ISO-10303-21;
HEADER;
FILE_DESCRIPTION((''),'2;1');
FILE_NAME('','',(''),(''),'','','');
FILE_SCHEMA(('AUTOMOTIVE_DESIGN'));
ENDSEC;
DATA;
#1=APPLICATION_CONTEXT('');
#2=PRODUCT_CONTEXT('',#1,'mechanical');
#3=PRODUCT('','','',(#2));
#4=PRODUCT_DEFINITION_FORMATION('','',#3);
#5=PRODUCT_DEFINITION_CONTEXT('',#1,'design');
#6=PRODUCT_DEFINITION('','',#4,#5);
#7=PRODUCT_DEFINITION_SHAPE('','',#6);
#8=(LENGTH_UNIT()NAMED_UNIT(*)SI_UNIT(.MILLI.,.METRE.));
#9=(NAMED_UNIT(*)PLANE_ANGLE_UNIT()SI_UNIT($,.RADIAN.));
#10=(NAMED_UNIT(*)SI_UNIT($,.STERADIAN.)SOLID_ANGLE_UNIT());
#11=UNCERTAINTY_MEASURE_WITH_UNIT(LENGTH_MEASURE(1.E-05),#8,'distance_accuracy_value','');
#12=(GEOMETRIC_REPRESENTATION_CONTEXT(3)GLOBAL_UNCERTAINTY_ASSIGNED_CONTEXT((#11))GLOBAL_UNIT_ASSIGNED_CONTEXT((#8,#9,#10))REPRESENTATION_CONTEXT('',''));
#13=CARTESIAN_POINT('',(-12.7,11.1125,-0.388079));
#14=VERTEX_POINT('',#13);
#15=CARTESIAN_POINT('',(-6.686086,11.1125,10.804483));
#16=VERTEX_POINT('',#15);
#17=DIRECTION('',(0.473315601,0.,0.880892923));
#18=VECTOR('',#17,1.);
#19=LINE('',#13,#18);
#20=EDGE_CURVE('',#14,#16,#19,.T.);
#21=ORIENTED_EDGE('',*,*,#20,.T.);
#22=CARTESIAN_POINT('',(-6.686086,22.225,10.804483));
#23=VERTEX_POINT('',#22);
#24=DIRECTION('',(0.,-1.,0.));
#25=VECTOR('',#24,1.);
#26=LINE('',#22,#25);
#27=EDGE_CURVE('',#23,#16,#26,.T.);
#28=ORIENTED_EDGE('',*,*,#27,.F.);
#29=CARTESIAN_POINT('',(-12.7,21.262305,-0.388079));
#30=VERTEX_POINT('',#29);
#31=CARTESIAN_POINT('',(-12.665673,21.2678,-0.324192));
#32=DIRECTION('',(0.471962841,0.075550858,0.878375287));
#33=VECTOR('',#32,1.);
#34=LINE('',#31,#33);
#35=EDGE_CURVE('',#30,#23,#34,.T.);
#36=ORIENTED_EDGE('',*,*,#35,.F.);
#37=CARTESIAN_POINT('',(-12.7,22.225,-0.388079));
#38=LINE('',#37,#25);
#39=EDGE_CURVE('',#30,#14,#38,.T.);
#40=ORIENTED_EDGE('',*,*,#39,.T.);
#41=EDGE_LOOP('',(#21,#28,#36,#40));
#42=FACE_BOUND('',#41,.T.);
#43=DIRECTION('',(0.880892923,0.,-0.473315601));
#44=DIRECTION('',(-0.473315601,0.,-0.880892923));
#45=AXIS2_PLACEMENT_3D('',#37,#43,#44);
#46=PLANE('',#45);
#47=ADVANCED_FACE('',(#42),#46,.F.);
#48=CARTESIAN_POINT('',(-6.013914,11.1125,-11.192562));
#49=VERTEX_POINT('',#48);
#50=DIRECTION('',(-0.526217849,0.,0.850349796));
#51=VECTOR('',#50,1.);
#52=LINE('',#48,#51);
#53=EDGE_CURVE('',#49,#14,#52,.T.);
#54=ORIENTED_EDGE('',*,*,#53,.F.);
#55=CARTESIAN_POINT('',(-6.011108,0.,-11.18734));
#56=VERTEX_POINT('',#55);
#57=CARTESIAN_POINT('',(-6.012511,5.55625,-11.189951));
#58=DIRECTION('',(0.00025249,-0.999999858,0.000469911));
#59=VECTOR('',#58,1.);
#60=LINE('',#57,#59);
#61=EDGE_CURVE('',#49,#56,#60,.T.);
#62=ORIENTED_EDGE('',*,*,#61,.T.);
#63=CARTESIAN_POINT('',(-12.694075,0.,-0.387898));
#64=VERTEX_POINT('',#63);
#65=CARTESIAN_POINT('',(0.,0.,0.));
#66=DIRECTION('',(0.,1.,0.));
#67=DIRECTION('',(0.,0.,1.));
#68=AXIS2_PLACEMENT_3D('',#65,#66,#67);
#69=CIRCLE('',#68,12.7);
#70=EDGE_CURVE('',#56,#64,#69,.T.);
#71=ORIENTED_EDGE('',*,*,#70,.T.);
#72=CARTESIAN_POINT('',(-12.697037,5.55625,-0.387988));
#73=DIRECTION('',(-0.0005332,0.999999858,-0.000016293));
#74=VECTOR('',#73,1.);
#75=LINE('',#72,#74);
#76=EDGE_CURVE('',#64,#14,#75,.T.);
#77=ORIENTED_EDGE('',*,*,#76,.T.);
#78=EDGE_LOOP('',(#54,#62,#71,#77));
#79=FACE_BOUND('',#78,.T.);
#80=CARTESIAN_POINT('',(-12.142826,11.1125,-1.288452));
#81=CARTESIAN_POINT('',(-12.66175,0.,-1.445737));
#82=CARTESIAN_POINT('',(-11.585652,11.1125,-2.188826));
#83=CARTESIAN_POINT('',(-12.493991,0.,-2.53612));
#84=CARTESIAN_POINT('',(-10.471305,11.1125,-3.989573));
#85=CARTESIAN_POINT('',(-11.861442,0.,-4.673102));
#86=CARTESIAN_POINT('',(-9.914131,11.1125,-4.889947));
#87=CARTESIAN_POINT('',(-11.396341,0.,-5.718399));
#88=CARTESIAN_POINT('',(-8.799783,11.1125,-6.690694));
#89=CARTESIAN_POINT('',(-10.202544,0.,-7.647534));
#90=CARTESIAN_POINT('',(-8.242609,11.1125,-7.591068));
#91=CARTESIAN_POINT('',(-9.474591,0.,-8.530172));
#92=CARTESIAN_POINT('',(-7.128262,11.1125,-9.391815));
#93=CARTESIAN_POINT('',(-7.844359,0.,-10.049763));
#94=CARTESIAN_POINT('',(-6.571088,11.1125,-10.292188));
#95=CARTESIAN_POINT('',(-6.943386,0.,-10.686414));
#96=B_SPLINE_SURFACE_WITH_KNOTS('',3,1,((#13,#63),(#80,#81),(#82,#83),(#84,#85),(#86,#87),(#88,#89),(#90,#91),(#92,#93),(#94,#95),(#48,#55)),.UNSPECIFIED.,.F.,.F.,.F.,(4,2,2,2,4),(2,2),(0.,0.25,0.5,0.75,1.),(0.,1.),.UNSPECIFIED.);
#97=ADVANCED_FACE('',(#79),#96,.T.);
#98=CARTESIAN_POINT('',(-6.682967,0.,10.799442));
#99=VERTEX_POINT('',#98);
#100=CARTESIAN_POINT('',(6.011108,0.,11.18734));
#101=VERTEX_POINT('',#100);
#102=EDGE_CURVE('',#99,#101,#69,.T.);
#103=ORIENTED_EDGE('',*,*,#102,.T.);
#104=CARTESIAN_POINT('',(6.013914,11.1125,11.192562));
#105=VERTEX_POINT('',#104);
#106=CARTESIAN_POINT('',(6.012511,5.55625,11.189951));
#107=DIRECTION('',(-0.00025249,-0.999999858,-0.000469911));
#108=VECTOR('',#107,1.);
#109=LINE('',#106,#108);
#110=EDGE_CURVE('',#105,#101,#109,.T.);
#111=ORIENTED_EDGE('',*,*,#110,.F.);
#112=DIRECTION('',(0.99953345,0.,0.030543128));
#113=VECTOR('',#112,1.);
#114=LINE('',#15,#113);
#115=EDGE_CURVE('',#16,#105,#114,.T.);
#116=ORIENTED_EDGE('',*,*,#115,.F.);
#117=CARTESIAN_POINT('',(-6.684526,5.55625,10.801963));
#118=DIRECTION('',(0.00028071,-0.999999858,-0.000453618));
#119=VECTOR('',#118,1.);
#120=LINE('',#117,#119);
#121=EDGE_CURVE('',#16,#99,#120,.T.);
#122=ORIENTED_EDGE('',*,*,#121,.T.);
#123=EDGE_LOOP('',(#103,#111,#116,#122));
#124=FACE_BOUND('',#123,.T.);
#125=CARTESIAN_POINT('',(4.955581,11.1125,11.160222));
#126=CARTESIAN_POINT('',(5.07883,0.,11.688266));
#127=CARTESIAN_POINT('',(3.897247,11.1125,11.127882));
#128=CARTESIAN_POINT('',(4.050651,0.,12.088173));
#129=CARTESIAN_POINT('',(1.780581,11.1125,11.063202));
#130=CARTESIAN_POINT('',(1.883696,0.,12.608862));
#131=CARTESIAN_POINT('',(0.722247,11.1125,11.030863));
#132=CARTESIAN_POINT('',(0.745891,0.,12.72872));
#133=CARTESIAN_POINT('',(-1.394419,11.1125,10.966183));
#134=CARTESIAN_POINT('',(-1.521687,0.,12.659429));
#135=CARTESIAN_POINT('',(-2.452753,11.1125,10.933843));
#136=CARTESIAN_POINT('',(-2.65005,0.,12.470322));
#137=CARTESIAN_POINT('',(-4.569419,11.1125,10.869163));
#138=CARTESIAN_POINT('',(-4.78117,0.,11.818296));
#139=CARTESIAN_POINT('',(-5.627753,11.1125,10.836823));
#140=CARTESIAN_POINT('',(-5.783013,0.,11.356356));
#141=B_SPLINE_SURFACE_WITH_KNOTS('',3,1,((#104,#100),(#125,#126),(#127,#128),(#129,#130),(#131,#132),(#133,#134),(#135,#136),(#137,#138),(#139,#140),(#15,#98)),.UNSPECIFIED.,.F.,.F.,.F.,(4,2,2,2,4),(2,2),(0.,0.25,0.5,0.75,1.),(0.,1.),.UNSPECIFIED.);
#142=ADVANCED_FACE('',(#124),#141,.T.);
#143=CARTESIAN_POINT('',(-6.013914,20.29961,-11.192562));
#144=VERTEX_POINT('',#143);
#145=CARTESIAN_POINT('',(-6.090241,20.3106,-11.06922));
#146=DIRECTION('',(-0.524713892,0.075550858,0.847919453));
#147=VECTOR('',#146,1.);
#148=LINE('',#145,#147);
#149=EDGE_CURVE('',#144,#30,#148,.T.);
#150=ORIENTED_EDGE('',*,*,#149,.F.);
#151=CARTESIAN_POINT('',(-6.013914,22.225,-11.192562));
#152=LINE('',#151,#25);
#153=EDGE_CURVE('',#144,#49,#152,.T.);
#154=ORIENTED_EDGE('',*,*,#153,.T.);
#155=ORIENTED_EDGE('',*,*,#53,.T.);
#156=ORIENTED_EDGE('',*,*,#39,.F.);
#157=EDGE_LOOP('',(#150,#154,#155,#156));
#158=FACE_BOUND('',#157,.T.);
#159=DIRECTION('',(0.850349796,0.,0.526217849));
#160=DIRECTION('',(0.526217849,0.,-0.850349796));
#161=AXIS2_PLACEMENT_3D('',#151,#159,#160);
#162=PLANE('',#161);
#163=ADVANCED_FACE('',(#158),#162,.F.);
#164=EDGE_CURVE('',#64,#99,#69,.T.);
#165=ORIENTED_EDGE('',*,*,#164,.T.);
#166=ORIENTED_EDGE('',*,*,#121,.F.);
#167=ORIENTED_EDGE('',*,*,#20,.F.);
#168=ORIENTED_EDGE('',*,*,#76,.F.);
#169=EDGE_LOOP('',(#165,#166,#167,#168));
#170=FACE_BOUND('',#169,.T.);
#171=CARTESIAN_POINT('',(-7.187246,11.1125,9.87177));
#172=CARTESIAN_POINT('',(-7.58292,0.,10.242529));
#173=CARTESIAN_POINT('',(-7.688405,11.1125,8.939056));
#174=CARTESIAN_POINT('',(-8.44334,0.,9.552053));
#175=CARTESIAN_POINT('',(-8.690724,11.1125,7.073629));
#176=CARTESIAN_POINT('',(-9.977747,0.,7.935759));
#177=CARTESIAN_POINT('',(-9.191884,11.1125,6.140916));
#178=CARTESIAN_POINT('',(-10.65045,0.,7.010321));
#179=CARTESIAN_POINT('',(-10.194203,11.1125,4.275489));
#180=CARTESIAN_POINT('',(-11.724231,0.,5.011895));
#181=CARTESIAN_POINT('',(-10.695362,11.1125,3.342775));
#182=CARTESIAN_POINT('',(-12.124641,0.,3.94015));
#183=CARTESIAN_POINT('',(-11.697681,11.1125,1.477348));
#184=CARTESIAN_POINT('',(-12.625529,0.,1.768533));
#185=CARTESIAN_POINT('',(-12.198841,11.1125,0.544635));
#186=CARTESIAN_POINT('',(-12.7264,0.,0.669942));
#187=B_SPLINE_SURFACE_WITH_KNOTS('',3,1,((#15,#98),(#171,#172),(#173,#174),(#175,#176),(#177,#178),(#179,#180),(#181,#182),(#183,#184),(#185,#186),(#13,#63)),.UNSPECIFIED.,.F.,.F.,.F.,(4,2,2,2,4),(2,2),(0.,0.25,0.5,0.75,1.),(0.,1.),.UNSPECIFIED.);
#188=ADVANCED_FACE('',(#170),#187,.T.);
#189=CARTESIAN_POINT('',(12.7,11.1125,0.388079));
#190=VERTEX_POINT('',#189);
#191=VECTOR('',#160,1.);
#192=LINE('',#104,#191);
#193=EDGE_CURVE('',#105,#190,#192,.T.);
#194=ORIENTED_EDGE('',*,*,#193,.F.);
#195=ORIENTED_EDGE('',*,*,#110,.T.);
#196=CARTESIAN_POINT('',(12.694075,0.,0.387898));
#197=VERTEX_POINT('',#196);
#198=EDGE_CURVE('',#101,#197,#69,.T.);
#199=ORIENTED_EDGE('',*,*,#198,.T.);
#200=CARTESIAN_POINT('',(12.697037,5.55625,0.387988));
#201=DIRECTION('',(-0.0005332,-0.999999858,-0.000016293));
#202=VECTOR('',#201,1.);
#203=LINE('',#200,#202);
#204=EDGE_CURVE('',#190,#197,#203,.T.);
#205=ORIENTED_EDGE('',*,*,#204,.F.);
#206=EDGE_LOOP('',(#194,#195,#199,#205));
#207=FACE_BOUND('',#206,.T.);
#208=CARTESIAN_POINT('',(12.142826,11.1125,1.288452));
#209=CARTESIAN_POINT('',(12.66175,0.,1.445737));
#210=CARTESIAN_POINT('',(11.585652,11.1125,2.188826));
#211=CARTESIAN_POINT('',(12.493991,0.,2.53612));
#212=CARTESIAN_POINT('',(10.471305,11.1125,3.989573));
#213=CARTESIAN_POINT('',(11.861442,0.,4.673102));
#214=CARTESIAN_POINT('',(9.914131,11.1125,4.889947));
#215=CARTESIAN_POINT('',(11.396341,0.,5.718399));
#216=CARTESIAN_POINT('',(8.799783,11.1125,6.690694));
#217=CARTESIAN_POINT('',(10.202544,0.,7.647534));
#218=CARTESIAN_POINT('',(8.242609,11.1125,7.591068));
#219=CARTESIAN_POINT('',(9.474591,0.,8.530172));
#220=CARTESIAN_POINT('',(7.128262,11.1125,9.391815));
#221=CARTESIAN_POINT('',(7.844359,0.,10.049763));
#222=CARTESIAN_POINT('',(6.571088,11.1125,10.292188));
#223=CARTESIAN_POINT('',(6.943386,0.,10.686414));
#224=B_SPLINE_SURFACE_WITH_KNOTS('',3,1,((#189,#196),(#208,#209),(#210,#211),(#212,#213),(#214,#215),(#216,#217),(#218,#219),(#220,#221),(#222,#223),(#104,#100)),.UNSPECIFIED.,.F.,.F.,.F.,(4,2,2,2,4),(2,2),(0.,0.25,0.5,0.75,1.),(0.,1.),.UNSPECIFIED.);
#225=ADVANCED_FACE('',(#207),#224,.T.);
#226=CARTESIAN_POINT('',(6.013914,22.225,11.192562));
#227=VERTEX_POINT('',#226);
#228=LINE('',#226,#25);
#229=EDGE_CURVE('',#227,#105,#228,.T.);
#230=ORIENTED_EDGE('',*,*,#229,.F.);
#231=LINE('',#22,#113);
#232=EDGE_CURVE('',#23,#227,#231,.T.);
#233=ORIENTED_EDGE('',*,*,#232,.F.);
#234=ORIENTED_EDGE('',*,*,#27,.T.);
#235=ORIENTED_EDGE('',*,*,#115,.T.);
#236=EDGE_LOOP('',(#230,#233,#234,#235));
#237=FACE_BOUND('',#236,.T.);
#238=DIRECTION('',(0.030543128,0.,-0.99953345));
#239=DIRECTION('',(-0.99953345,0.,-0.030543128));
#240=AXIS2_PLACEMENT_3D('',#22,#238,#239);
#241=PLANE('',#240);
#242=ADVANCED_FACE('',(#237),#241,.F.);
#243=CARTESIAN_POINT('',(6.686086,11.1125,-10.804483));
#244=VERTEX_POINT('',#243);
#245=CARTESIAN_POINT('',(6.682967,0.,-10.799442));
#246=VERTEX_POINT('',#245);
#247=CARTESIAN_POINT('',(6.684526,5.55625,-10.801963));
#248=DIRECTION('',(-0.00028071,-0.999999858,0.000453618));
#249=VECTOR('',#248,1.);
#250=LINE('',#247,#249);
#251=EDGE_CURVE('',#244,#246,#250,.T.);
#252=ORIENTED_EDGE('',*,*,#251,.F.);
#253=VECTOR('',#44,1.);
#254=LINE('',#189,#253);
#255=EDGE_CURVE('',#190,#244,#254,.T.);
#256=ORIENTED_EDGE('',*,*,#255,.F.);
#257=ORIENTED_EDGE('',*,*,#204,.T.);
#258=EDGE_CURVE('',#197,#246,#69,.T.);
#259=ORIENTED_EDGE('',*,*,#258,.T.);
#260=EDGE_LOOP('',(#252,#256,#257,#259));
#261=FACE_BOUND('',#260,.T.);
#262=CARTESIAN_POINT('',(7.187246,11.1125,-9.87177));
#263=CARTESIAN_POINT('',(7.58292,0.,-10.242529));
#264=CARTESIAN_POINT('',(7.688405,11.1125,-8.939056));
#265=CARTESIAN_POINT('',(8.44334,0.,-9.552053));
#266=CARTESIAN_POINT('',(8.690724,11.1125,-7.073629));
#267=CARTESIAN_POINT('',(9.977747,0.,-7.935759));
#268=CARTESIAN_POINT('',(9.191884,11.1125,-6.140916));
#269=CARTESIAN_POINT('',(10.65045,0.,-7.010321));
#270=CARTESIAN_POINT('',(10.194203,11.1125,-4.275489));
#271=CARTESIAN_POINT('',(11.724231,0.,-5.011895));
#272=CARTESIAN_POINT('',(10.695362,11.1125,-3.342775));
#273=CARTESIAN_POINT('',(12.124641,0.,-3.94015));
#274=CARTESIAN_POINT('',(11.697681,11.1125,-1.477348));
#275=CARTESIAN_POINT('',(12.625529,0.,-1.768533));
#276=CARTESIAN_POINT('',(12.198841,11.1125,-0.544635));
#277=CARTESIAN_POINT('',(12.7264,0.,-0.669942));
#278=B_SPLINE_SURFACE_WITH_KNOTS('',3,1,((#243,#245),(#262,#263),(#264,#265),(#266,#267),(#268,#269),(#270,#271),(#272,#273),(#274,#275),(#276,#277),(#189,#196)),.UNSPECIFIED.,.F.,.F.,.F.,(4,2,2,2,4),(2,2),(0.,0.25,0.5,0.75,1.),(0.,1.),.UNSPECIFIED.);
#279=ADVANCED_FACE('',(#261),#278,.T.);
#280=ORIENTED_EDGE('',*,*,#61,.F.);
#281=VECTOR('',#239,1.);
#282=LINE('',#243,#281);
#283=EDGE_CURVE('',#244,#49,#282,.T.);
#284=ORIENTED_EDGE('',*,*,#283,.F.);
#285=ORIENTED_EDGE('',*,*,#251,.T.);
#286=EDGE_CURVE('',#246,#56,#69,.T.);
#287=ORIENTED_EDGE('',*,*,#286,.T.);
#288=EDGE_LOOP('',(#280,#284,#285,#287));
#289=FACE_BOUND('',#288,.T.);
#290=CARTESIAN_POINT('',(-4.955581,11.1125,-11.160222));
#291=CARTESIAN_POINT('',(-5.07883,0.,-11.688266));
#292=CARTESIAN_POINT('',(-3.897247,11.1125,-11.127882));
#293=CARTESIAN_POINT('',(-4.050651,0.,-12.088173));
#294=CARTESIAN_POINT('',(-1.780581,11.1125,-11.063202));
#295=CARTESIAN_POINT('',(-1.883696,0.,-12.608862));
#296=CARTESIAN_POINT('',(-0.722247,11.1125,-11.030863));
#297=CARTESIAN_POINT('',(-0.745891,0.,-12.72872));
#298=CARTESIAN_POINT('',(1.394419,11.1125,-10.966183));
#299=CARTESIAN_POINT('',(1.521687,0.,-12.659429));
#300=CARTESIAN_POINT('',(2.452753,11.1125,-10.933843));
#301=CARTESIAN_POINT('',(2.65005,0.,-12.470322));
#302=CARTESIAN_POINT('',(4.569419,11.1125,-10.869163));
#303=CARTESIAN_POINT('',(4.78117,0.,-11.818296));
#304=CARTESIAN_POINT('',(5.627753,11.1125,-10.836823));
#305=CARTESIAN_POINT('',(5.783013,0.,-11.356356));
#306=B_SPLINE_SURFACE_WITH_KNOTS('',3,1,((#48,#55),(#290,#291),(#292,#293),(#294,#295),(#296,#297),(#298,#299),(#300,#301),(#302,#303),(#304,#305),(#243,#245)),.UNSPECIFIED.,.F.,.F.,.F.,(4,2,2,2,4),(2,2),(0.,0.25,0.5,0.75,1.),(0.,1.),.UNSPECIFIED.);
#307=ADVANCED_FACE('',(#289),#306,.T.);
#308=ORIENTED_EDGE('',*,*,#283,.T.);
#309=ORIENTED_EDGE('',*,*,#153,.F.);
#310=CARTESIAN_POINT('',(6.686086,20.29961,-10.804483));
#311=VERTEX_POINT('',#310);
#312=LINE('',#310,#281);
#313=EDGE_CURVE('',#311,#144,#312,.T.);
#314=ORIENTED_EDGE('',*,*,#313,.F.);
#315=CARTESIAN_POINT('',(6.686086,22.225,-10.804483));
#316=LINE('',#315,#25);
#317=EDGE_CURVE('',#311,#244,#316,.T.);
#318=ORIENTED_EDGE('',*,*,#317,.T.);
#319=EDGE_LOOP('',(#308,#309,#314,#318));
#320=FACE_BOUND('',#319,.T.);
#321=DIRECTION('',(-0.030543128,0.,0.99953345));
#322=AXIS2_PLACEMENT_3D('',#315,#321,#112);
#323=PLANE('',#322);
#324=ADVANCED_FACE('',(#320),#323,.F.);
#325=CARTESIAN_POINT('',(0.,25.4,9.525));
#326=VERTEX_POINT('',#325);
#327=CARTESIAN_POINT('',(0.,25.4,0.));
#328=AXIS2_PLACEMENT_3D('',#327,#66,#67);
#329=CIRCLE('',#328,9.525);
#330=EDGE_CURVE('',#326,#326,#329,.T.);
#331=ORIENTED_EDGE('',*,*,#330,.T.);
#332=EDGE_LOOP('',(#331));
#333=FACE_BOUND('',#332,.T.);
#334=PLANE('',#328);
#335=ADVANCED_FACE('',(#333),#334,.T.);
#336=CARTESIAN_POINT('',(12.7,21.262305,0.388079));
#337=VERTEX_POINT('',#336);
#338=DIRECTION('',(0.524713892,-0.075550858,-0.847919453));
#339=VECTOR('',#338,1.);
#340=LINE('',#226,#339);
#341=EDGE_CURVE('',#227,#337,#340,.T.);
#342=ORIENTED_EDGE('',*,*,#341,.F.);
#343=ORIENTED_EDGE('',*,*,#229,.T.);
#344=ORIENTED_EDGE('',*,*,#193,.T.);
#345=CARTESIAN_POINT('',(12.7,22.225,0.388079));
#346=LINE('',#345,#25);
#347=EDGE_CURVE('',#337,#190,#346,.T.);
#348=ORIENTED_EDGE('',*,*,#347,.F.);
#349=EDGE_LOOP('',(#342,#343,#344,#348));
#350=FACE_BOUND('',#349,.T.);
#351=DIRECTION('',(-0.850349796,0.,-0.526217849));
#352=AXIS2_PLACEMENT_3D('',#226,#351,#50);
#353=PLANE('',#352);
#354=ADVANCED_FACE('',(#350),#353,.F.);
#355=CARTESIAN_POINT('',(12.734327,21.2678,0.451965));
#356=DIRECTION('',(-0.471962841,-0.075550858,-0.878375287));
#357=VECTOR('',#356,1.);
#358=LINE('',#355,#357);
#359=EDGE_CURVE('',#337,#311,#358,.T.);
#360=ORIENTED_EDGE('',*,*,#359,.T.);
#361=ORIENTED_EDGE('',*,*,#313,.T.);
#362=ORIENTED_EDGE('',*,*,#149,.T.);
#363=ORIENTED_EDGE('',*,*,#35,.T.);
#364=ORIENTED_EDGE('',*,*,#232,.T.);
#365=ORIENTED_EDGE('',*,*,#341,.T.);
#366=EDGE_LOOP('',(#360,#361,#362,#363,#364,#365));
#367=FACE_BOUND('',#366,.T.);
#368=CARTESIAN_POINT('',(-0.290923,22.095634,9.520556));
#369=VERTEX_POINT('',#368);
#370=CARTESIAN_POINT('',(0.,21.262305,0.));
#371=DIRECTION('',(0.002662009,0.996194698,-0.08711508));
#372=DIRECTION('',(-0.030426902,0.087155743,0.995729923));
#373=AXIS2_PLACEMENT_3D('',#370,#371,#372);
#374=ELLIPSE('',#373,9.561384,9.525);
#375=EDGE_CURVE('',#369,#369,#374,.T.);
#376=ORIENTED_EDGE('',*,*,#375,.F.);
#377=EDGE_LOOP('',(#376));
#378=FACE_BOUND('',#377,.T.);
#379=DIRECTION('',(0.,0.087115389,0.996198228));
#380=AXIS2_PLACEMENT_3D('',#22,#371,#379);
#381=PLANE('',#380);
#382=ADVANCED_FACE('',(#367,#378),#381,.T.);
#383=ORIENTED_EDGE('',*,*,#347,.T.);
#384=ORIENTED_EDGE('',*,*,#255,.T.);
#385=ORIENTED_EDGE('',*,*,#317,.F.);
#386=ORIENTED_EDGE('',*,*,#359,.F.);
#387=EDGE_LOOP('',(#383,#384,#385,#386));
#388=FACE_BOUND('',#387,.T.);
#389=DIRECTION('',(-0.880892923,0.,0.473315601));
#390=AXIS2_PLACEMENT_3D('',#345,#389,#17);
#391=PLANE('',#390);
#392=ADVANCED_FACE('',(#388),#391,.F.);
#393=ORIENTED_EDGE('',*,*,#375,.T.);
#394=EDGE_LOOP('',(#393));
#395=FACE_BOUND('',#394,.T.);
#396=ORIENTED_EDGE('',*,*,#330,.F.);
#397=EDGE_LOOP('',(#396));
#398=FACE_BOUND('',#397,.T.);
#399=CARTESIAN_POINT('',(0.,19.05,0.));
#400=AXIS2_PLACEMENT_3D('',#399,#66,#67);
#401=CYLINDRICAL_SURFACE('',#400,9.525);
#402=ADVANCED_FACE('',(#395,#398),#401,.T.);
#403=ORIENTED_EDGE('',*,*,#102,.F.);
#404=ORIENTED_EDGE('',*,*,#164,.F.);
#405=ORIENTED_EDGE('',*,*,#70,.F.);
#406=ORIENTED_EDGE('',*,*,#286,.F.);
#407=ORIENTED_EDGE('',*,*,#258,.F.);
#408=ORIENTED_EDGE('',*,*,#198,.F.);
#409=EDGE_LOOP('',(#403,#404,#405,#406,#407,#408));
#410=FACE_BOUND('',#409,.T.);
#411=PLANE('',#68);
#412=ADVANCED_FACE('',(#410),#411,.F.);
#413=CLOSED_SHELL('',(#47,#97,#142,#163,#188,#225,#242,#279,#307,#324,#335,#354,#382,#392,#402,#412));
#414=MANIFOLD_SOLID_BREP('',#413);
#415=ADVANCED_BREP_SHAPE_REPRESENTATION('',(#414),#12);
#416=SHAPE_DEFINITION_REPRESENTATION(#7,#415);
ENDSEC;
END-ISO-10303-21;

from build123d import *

# Parameters (mm, degrees)
BOSS_EXTRUDE1_DEPTH      = 11.1125
DRAFT2_START             = 21.18139532
DRAFT2_OUTLINE_W         = 28
DRAFT2_OUTLINE_H         = 26
DRAFT2_DEPTH             = 1.91806369
BOSS_EXTRUDE2_DEPTH      = 3.175
BOSS_EXTRUDE2_DEPTH_BACK = 3.175
SKETCH7_R                = 9.525


# Read off the part's stored shape, not the designer's step: Draft2
with BuildPart() as part:
    # Sketch3 → Loft1 section 0
    with BuildSketch(Plane(origin=(0, 11.1125, 0), x_dir=(1, 0, 0), z_dir=(0, 1, 0))):
        with BuildLine():
            Line((6.01391392, -11.192562017), (12.7, -0.388078778))
            Line((12.7, -0.388078778), (6.68608608, 10.804483239))
            Line((6.68608608, 10.804483239), (-6.01391392, 11.192562017))
            Line((-6.01391392, 11.192562017), (-12.7, 0.388078778))
            Line((-12.7, 0.388078778), (-6.68608608, -10.804483239))
            Line((-6.68608608, -10.804483239), (6.01391392, -11.192562017))
        make_face()
    # Sketch2 for Loft1 → Loft1 section 1
    with BuildSketch(Plane(origin=(0, 0, 0), x_dir=(1, 0, 0), z_dir=(0, 1, 0))):
        with BuildLine():
            # circular arc as an exact rational Bezier (weights 1, cos(half-angle), 1)
            Bezier((6.011108127, -11.187340126), (12.47012196, -7.716825231), (12.694074813, -0.38789772), weights=[1, 0.866025404, 1])
            Bezier((12.694074813, -0.38789772), (12.918027667, 6.941029791), (6.682966686, 10.799442406), weights=[1, 0.866025404, 1])
            Bezier((6.682966686, 10.799442406), (0.447905706, 14.65785502), (-6.011108127, 11.187340126), weights=[1, 0.866025404, 1])
            Bezier((-6.011108127, 11.187340126), (-12.47012196, 7.716825231), (-12.694074813, 0.38789772), weights=[1, 0.866025404, 1])
            Bezier((-12.694074813, 0.38789772), (-12.918027667, -6.941029791), (-6.682966686, -10.799442406), weights=[1, 0.866025404, 1])
            Bezier((-6.682966686, -10.799442406), (-0.447905706, -14.65785502), (6.011108127, -11.187340126), weights=[1, 0.866025404, 1])
        make_face()
    loft()

    # Sketch3<2> → Boss-Extrude1 (add)
    with BuildSketch(Plane(origin=(0, 11.1125, 0), x_dir=(1, 0, 0), z_dir=(0, 1, 0))):
        Polygon((6.01391392, -11.192562017), (12.7, -0.388078778), (6.68608608, 10.804483239), (-6.01391392, 11.192562017), (-12.7, 0.388078778), (-6.68608608, -10.804483239), align=None)
    extrude(amount=BOSS_EXTRUDE1_DEPTH)

    # Draft2 outline → Draft2 (cut)
    with BuildSketch(Plane(origin=(0, 0, 0), x_dir=(0.999996456847854, -0.002651888614820864, 0.00023190194633995566), z_dir=(0.00266200896657633, 0.9961946980917459, -0.0871150802224119)).offset(DRAFT2_START)):
        with Locations((0, -2)):
            Rectangle(DRAFT2_OUTLINE_W, DRAFT2_OUTLINE_H)
    extrude(amount=DRAFT2_DEPTH, mode=Mode.SUBTRACT)

    # Sketch7 → Boss-Extrude2 (add, two sides: drawn at the far end of the back side and taken through both)
    with BuildSketch(Plane(origin=(0, 22.225, 0), x_dir=(1, 0, 0), z_dir=(0, 1, 0)).offset(-BOSS_EXTRUDE2_DEPTH_BACK)):
        with Locations(Location((0, 0, 0), (0, 0, 270))):
            Circle(SKETCH7_R)
    extrude(amount=BOSS_EXTRUDE2_DEPTH + BOSS_EXTRUDE2_DEPTH_BACK)


solid = part.part
